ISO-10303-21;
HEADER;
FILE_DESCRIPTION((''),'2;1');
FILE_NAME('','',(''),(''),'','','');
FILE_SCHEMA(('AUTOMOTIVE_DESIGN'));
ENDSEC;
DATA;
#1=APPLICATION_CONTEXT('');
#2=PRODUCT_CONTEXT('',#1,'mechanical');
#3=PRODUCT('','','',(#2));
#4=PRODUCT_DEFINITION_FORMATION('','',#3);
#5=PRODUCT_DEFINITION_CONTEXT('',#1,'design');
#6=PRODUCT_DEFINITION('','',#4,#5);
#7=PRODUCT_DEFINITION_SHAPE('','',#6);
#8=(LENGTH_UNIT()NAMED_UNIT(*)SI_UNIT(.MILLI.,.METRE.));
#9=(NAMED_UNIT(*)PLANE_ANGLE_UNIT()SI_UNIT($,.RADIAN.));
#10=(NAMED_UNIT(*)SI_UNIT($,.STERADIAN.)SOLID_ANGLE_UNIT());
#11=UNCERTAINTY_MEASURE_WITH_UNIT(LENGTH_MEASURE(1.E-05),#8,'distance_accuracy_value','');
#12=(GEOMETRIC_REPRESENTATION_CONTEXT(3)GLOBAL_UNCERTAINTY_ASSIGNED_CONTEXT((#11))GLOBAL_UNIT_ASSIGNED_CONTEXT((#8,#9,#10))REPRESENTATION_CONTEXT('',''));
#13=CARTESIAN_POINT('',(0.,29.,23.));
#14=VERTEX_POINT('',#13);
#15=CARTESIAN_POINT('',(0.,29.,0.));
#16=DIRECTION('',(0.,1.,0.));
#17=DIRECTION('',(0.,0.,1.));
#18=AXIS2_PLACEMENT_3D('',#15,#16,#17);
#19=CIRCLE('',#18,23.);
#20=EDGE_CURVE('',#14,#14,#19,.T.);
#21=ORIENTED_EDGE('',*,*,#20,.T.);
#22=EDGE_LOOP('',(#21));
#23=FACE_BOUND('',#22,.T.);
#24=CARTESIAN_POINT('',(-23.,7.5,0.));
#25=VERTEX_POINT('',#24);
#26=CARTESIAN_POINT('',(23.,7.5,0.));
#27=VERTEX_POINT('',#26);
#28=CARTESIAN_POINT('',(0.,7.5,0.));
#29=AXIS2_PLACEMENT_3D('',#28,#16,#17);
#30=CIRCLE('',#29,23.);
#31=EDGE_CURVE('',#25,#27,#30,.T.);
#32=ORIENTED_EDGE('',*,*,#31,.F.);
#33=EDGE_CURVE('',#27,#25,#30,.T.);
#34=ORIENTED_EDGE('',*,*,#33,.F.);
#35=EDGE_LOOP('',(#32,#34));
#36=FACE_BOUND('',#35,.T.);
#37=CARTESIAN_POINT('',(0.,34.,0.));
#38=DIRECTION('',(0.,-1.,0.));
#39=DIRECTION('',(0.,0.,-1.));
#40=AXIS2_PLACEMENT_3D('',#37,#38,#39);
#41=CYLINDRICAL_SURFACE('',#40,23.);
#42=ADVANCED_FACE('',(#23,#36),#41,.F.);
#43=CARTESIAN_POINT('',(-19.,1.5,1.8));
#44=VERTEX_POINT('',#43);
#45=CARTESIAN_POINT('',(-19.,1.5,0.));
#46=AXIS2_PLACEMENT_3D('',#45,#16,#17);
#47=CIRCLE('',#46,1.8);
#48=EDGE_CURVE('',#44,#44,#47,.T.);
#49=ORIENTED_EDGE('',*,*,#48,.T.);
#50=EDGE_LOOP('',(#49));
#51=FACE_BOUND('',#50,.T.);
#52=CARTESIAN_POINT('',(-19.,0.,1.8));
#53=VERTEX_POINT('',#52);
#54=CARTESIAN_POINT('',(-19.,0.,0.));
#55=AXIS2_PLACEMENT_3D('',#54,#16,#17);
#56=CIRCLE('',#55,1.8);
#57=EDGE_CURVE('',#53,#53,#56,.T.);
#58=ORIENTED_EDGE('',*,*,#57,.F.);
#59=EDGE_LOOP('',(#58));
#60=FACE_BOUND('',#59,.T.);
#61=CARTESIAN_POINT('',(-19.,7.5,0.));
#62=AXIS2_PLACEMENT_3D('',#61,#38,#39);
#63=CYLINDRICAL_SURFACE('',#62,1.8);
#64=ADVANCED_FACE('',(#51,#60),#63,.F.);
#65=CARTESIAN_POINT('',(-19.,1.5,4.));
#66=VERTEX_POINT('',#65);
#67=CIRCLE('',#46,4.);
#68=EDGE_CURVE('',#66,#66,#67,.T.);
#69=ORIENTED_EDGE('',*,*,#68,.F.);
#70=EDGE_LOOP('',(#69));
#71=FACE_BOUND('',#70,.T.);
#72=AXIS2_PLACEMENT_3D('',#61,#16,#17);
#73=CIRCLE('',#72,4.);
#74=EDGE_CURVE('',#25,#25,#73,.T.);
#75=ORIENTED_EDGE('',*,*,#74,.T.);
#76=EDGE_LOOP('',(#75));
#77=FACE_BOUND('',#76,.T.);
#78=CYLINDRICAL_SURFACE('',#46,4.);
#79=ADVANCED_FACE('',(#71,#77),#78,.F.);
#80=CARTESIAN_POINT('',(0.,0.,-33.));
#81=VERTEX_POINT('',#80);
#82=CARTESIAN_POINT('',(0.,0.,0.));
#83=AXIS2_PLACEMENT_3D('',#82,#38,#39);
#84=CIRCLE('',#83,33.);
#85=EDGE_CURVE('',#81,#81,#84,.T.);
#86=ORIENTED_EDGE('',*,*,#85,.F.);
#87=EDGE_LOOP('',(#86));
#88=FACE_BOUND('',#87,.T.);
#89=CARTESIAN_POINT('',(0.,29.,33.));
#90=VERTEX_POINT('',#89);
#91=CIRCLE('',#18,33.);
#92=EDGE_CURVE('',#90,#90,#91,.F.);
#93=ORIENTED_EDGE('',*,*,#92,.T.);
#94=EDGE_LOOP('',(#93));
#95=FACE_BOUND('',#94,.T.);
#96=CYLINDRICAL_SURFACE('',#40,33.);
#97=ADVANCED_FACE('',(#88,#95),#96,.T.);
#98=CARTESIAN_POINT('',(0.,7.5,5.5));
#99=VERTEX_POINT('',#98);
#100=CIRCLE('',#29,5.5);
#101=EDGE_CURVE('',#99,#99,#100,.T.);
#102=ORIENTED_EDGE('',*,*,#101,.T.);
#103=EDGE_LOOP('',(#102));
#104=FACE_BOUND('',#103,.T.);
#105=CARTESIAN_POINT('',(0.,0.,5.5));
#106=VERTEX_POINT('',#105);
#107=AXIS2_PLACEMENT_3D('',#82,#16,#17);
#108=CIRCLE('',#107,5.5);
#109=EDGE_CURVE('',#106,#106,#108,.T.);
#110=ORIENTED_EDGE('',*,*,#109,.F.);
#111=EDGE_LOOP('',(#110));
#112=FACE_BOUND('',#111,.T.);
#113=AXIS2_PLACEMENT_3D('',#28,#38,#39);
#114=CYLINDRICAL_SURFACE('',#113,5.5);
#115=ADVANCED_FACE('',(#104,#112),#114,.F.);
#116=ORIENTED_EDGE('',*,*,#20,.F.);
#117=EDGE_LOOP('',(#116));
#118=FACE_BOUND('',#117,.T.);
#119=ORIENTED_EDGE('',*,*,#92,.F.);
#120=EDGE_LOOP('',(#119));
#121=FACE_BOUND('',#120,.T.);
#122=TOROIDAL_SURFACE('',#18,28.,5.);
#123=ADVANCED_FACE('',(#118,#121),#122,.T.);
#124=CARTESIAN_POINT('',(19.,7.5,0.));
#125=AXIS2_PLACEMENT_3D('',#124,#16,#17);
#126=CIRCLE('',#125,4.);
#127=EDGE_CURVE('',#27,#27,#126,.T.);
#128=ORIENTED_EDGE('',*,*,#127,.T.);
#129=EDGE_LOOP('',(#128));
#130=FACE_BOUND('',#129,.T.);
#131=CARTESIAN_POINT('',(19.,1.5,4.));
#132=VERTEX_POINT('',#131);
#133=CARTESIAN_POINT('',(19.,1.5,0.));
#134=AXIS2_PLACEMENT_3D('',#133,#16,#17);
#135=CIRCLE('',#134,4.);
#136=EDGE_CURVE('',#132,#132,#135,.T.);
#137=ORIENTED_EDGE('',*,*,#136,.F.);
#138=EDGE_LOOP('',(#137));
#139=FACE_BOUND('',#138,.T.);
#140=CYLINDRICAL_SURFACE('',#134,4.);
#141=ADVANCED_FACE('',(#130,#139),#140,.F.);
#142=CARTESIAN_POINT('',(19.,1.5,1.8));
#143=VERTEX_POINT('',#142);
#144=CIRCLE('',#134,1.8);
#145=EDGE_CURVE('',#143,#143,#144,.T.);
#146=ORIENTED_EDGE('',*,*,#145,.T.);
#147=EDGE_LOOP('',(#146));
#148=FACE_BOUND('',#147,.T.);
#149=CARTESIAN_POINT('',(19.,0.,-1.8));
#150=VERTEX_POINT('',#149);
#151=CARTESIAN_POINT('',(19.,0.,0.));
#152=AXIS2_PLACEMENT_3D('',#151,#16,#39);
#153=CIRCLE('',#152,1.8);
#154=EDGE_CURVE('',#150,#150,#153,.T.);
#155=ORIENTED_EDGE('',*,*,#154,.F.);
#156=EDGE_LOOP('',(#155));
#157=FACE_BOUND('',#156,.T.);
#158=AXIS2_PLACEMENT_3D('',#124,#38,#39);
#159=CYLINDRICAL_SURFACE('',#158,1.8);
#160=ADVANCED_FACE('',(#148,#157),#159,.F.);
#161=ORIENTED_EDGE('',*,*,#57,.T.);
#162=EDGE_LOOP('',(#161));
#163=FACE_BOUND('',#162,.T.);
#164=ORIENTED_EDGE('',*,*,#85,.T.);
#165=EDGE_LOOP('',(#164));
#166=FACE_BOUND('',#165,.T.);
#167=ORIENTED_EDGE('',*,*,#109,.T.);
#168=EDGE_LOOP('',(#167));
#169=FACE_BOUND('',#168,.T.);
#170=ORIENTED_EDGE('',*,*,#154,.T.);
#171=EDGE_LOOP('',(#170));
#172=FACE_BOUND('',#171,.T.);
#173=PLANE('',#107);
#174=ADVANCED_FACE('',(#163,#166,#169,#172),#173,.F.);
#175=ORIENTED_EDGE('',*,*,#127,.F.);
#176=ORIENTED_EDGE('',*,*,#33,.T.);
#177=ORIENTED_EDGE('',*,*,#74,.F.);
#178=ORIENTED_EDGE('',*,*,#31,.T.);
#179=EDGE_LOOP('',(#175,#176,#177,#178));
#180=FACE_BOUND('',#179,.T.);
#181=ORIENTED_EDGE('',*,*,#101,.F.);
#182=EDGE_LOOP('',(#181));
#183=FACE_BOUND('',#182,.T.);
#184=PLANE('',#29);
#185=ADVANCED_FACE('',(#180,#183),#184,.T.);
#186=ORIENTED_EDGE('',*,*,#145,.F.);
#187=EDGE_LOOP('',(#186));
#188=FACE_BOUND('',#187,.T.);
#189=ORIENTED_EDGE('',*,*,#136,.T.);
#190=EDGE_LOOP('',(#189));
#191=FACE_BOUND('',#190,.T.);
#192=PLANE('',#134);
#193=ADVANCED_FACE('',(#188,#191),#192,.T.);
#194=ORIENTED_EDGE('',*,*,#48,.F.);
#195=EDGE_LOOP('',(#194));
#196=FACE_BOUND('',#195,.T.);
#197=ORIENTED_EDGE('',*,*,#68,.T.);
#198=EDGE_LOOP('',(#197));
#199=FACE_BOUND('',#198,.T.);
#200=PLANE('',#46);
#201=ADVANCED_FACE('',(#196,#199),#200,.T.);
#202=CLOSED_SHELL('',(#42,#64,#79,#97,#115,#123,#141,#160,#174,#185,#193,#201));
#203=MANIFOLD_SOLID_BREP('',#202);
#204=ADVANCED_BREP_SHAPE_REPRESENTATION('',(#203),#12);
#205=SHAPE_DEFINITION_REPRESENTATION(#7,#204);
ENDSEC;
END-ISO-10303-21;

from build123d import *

# Parameters (mm, degrees)
SKETCH1_R           = 25
SKETCH1_R_2         = 1.8
SKETCH1_R_3         = 5.5
BOSS_EXTRUDE1_DEPTH = 7.5
SKETCH2_R           = 4
CUT_EXTRUDE1_DEPTH  = 6
BOSS_EXTRUDE2_START = -7.5
SKETCH3_R           = 33
SKETCH3_R_2         = 23
BOSS_EXTRUDE2_DEPTH = 26.5
FILLET1_R           = 5
SKETCH3_2_R         = 33
SKETCH3_2_R_2       = 23
BOSS_EXTRUDE3_DEPTH = 7.5


with BuildPart() as part:
    # Sketch1 → Boss-Extrude1 (new body)
    with BuildSketch(Plane(origin=(0, 0, 0), x_dir=(1, 0, 0), z_dir=(0, 1, 0))):
        with Locations(Location((0, 0, 0), (0, 0, 270))):
            Circle(SKETCH1_R)
        with Locations(Location((-19, 0, 0), (0, 0, 270))):
            Circle(SKETCH1_R_2, mode=Mode.SUBTRACT)
        with Locations(Location((19, 0, 0), (0, 0, 90))):
            Circle(SKETCH1_R_2, mode=Mode.SUBTRACT)
        with Locations(Location((0, 0, 0), (0, 0, 270))):
            Circle(SKETCH1_R_3, mode=Mode.SUBTRACT)
    extrude(amount=BOSS_EXTRUDE1_DEPTH)

    # Sketch2 → Cut-Extrude1 (cut)
    with BuildSketch(Plane(origin=(0, 7.5, 0), x_dir=(1, 0, 0), z_dir=(0, 1, 0))):
        with Locations(Location((-19, 0, 0), (0, 0, 270))):
            Circle(SKETCH2_R)
        with Locations(Location((19, 0, 0), (0, 0, 270))):
            Circle(SKETCH2_R)
    extrude(amount=-CUT_EXTRUDE1_DEPTH, mode=Mode.SUBTRACT)

    # Sketch3 → Boss-Extrude2 (add)
    with BuildSketch(Plane.XZ.offset(BOSS_EXTRUDE2_START)):
        with Locations(Location((0, 0, 0), (0, 0, 90))):
            Circle(SKETCH3_R)
        with Locations(Location((0, 0, 0), (0, 0, 180.000077522))):
            Circle(SKETCH3_R_2, mode=Mode.SUBTRACT)
    extrude(amount=-BOSS_EXTRUDE2_DEPTH)

    # Fillet1
    fillet1_edges = [part.edges().sort_by_distance(p)[0] for p in [
        (0, 34, -33),
        (23, 34, 3.1119e-05),
    ]]
    fillet(fillet1_edges, radius=FILLET1_R - 0.0001)  # a hair under: the kernel refuses the full size

    # Sketch3<2> → Boss-Extrude3 (add)
    with BuildSketch(Plane.XZ):
        with Locations(Location((0, 0, 0), (0, 0, 270))):
            Circle(SKETCH3_2_R)
        with Locations(Location((0, 0, 0), (0, 0, 180.000077522))):
            Circle(SKETCH3_2_R_2, mode=Mode.SUBTRACT)
    extrude(amount=-BOSS_EXTRUDE3_DEPTH)


solid = part.part
